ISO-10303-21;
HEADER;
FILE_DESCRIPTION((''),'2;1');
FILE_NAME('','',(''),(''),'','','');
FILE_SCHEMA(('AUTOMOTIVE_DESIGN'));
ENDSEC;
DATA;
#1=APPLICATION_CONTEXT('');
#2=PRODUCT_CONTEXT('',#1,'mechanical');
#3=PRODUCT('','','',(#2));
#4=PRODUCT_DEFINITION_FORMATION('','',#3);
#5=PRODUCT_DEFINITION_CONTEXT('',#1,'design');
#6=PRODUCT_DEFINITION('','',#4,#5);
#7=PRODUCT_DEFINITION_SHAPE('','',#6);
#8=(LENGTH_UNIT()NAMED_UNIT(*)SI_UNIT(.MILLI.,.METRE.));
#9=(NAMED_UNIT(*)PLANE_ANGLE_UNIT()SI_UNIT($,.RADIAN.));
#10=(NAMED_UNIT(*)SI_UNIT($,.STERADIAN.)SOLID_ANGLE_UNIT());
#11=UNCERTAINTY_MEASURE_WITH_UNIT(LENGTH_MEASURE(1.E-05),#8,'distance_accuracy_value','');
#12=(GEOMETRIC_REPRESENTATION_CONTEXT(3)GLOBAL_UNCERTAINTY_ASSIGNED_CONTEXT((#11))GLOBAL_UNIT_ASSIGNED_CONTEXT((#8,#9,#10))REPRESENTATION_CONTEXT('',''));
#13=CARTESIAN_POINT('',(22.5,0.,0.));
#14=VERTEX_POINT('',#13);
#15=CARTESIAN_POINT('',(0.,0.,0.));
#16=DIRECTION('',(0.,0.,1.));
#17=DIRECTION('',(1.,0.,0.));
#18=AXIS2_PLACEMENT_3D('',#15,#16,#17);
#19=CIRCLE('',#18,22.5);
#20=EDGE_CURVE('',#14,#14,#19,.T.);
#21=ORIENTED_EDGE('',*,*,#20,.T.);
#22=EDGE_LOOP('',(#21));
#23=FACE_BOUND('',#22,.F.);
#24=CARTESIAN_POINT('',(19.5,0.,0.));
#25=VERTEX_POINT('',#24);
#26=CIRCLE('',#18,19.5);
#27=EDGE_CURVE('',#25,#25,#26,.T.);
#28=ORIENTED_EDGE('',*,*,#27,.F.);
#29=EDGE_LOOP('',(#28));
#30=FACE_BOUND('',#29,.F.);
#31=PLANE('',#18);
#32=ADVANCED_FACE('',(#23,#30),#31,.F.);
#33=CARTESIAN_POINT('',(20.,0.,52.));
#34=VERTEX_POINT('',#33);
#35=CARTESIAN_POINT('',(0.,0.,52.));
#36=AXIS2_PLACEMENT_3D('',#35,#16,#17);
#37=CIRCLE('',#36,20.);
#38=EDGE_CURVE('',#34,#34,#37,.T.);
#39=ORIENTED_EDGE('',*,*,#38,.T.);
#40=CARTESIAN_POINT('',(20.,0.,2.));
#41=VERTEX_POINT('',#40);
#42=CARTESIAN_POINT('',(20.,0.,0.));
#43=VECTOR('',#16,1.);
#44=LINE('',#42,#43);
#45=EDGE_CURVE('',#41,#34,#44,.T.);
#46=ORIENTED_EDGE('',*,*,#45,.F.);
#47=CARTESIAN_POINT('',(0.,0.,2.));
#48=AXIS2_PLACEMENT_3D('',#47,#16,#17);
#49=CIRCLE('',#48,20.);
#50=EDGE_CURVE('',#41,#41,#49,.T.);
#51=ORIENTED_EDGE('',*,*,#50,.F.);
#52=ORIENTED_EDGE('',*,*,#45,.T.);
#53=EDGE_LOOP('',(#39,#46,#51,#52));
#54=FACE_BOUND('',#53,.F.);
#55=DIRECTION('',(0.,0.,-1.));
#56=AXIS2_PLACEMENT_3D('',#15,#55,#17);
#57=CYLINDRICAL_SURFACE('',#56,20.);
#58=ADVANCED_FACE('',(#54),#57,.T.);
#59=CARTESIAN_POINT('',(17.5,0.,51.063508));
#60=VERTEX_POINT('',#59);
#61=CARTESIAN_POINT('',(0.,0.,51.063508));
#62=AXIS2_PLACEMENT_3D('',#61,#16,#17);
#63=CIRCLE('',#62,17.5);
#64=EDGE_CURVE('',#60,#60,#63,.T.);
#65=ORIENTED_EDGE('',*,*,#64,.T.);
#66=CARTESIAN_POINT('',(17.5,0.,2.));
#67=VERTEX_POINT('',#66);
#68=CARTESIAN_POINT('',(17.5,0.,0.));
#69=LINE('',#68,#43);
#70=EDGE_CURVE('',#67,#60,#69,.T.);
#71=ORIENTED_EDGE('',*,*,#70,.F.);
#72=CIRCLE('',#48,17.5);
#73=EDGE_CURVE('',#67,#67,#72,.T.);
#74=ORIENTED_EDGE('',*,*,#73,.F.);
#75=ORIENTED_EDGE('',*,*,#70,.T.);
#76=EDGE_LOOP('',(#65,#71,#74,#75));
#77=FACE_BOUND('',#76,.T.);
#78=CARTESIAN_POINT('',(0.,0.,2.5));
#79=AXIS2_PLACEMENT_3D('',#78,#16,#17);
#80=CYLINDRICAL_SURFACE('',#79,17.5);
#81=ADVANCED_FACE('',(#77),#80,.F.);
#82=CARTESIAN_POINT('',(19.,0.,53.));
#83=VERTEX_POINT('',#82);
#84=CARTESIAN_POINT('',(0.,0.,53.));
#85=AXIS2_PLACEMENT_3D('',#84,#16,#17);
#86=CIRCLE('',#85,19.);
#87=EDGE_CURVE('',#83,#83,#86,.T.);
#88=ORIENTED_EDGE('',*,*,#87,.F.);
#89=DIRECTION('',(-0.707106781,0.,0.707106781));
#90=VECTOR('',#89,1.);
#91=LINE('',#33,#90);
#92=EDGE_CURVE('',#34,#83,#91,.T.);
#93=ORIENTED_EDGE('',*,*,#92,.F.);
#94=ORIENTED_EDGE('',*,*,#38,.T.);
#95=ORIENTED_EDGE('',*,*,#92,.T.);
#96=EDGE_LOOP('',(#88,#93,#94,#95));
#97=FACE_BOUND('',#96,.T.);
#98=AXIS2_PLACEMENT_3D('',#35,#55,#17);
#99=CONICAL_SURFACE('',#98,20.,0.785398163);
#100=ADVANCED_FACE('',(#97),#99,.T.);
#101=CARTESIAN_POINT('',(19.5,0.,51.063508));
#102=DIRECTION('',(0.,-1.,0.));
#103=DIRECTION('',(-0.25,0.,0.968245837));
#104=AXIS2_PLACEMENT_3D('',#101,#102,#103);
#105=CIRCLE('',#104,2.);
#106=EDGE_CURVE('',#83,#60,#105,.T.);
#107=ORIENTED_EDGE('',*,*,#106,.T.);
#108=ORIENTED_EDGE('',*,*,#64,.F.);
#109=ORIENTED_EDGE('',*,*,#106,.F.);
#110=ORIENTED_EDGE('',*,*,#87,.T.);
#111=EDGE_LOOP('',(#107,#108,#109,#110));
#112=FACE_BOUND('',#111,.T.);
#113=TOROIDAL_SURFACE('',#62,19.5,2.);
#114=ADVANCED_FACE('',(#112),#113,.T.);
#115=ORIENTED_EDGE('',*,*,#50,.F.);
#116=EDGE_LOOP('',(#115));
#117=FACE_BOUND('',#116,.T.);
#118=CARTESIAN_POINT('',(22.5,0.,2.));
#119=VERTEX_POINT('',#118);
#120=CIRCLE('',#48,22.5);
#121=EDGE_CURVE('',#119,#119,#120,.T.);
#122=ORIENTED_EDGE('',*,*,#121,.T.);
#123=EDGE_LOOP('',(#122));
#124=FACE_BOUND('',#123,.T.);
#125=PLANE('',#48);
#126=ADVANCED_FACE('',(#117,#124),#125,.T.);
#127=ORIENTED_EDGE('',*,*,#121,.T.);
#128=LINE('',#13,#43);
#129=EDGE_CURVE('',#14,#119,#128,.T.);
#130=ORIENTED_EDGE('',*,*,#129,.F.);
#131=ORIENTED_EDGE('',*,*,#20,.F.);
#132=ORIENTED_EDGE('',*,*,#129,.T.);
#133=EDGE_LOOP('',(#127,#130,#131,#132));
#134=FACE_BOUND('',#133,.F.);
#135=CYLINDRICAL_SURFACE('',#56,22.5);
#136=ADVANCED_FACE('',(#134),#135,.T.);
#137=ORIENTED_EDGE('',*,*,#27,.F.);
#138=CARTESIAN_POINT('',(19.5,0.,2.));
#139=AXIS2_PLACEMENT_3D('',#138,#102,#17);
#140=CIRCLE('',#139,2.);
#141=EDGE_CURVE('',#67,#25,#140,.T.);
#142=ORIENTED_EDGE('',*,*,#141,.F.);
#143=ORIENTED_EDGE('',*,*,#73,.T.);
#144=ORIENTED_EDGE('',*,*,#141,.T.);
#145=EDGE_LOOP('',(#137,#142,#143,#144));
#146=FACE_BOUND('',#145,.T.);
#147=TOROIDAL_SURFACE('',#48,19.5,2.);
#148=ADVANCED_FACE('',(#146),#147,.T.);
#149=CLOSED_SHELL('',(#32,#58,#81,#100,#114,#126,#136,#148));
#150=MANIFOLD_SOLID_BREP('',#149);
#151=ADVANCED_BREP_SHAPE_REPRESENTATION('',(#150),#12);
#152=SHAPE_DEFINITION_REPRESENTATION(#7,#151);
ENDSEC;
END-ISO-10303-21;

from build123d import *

# Parameters (mm, degrees)
F0_R     = 20
F1_DEPTH = 53
F0_R_2   = 22.5
F2_DEPTH = 2
F3_T     = -2.5
F4_DEPTH = 3
F5_SIZE  = 1
F7_R     = 2


# Not quite as in the source:
# - a fillet or chamfer that OpenCascade refuses, or shapes differently, is made with other operations: its cross-section is extruded or revolved along the edge and cut away or added


with BuildPart() as f1:
    # F0 (on Top) → F1 (new body)
    with BuildSketch(Plane.XY):
        Circle(F0_R)
    extrude(amount=F1_DEPTH)

    # F0 (on Top) → F2 (join)
    with BuildSketch(Plane.XY):
        Circle(F0_R_2)
        Circle(F0_R, mode=Mode.SUBTRACT)
    extrude(amount=F2_DEPTH)

    # F3
    f3_openings = [f1.faces().sort_by_distance(p)[0] for p in [
        (0, 0, 53),
    ]]
    offset(amount=F3_T, openings=f3_openings)

    # F4 (cut): a face of the model
    f4_faces = [f1.faces().sort_by_distance(p)[0] for p in [
        (0, 0, 2.5),
    ]]
    extrude(f4_faces, amount=-F4_DEPTH, mode=Mode.SUBTRACT)

    # F5
    f5_edges = [f1.edges().sort_by_distance(p)[0] for p in [
        (-20, 0, 53),
    ]]
    chamfer(f5_edges, length=F5_SIZE)

    # F6: fillet of radius 2 on 2 edges, made by hand

    # F6_s1 → F6_t2 (revolve, cut)
    with BuildSketch(Plane.XZ):
        with BuildLine():
            ThreePointArc((19, 53), (17.9188611699, 52.2882531983), (17.5, 51.0635083269))
            Line((17.5, 51.0635083269), (17.5, 53))
            Line((17.5, 53), (19, 53))
        make_face()
    revolve(axis=Axis((0, 0, 53), (0, 0, 1)), mode=Mode.SUBTRACT)

    # F7
    f7_edges = [f1.edges().sort_by_distance(p)[0] for p in [
        (-17.5, 0, 0),
    ]]
    fillet(f7_edges, radius=F7_R)


solid = f1.part
